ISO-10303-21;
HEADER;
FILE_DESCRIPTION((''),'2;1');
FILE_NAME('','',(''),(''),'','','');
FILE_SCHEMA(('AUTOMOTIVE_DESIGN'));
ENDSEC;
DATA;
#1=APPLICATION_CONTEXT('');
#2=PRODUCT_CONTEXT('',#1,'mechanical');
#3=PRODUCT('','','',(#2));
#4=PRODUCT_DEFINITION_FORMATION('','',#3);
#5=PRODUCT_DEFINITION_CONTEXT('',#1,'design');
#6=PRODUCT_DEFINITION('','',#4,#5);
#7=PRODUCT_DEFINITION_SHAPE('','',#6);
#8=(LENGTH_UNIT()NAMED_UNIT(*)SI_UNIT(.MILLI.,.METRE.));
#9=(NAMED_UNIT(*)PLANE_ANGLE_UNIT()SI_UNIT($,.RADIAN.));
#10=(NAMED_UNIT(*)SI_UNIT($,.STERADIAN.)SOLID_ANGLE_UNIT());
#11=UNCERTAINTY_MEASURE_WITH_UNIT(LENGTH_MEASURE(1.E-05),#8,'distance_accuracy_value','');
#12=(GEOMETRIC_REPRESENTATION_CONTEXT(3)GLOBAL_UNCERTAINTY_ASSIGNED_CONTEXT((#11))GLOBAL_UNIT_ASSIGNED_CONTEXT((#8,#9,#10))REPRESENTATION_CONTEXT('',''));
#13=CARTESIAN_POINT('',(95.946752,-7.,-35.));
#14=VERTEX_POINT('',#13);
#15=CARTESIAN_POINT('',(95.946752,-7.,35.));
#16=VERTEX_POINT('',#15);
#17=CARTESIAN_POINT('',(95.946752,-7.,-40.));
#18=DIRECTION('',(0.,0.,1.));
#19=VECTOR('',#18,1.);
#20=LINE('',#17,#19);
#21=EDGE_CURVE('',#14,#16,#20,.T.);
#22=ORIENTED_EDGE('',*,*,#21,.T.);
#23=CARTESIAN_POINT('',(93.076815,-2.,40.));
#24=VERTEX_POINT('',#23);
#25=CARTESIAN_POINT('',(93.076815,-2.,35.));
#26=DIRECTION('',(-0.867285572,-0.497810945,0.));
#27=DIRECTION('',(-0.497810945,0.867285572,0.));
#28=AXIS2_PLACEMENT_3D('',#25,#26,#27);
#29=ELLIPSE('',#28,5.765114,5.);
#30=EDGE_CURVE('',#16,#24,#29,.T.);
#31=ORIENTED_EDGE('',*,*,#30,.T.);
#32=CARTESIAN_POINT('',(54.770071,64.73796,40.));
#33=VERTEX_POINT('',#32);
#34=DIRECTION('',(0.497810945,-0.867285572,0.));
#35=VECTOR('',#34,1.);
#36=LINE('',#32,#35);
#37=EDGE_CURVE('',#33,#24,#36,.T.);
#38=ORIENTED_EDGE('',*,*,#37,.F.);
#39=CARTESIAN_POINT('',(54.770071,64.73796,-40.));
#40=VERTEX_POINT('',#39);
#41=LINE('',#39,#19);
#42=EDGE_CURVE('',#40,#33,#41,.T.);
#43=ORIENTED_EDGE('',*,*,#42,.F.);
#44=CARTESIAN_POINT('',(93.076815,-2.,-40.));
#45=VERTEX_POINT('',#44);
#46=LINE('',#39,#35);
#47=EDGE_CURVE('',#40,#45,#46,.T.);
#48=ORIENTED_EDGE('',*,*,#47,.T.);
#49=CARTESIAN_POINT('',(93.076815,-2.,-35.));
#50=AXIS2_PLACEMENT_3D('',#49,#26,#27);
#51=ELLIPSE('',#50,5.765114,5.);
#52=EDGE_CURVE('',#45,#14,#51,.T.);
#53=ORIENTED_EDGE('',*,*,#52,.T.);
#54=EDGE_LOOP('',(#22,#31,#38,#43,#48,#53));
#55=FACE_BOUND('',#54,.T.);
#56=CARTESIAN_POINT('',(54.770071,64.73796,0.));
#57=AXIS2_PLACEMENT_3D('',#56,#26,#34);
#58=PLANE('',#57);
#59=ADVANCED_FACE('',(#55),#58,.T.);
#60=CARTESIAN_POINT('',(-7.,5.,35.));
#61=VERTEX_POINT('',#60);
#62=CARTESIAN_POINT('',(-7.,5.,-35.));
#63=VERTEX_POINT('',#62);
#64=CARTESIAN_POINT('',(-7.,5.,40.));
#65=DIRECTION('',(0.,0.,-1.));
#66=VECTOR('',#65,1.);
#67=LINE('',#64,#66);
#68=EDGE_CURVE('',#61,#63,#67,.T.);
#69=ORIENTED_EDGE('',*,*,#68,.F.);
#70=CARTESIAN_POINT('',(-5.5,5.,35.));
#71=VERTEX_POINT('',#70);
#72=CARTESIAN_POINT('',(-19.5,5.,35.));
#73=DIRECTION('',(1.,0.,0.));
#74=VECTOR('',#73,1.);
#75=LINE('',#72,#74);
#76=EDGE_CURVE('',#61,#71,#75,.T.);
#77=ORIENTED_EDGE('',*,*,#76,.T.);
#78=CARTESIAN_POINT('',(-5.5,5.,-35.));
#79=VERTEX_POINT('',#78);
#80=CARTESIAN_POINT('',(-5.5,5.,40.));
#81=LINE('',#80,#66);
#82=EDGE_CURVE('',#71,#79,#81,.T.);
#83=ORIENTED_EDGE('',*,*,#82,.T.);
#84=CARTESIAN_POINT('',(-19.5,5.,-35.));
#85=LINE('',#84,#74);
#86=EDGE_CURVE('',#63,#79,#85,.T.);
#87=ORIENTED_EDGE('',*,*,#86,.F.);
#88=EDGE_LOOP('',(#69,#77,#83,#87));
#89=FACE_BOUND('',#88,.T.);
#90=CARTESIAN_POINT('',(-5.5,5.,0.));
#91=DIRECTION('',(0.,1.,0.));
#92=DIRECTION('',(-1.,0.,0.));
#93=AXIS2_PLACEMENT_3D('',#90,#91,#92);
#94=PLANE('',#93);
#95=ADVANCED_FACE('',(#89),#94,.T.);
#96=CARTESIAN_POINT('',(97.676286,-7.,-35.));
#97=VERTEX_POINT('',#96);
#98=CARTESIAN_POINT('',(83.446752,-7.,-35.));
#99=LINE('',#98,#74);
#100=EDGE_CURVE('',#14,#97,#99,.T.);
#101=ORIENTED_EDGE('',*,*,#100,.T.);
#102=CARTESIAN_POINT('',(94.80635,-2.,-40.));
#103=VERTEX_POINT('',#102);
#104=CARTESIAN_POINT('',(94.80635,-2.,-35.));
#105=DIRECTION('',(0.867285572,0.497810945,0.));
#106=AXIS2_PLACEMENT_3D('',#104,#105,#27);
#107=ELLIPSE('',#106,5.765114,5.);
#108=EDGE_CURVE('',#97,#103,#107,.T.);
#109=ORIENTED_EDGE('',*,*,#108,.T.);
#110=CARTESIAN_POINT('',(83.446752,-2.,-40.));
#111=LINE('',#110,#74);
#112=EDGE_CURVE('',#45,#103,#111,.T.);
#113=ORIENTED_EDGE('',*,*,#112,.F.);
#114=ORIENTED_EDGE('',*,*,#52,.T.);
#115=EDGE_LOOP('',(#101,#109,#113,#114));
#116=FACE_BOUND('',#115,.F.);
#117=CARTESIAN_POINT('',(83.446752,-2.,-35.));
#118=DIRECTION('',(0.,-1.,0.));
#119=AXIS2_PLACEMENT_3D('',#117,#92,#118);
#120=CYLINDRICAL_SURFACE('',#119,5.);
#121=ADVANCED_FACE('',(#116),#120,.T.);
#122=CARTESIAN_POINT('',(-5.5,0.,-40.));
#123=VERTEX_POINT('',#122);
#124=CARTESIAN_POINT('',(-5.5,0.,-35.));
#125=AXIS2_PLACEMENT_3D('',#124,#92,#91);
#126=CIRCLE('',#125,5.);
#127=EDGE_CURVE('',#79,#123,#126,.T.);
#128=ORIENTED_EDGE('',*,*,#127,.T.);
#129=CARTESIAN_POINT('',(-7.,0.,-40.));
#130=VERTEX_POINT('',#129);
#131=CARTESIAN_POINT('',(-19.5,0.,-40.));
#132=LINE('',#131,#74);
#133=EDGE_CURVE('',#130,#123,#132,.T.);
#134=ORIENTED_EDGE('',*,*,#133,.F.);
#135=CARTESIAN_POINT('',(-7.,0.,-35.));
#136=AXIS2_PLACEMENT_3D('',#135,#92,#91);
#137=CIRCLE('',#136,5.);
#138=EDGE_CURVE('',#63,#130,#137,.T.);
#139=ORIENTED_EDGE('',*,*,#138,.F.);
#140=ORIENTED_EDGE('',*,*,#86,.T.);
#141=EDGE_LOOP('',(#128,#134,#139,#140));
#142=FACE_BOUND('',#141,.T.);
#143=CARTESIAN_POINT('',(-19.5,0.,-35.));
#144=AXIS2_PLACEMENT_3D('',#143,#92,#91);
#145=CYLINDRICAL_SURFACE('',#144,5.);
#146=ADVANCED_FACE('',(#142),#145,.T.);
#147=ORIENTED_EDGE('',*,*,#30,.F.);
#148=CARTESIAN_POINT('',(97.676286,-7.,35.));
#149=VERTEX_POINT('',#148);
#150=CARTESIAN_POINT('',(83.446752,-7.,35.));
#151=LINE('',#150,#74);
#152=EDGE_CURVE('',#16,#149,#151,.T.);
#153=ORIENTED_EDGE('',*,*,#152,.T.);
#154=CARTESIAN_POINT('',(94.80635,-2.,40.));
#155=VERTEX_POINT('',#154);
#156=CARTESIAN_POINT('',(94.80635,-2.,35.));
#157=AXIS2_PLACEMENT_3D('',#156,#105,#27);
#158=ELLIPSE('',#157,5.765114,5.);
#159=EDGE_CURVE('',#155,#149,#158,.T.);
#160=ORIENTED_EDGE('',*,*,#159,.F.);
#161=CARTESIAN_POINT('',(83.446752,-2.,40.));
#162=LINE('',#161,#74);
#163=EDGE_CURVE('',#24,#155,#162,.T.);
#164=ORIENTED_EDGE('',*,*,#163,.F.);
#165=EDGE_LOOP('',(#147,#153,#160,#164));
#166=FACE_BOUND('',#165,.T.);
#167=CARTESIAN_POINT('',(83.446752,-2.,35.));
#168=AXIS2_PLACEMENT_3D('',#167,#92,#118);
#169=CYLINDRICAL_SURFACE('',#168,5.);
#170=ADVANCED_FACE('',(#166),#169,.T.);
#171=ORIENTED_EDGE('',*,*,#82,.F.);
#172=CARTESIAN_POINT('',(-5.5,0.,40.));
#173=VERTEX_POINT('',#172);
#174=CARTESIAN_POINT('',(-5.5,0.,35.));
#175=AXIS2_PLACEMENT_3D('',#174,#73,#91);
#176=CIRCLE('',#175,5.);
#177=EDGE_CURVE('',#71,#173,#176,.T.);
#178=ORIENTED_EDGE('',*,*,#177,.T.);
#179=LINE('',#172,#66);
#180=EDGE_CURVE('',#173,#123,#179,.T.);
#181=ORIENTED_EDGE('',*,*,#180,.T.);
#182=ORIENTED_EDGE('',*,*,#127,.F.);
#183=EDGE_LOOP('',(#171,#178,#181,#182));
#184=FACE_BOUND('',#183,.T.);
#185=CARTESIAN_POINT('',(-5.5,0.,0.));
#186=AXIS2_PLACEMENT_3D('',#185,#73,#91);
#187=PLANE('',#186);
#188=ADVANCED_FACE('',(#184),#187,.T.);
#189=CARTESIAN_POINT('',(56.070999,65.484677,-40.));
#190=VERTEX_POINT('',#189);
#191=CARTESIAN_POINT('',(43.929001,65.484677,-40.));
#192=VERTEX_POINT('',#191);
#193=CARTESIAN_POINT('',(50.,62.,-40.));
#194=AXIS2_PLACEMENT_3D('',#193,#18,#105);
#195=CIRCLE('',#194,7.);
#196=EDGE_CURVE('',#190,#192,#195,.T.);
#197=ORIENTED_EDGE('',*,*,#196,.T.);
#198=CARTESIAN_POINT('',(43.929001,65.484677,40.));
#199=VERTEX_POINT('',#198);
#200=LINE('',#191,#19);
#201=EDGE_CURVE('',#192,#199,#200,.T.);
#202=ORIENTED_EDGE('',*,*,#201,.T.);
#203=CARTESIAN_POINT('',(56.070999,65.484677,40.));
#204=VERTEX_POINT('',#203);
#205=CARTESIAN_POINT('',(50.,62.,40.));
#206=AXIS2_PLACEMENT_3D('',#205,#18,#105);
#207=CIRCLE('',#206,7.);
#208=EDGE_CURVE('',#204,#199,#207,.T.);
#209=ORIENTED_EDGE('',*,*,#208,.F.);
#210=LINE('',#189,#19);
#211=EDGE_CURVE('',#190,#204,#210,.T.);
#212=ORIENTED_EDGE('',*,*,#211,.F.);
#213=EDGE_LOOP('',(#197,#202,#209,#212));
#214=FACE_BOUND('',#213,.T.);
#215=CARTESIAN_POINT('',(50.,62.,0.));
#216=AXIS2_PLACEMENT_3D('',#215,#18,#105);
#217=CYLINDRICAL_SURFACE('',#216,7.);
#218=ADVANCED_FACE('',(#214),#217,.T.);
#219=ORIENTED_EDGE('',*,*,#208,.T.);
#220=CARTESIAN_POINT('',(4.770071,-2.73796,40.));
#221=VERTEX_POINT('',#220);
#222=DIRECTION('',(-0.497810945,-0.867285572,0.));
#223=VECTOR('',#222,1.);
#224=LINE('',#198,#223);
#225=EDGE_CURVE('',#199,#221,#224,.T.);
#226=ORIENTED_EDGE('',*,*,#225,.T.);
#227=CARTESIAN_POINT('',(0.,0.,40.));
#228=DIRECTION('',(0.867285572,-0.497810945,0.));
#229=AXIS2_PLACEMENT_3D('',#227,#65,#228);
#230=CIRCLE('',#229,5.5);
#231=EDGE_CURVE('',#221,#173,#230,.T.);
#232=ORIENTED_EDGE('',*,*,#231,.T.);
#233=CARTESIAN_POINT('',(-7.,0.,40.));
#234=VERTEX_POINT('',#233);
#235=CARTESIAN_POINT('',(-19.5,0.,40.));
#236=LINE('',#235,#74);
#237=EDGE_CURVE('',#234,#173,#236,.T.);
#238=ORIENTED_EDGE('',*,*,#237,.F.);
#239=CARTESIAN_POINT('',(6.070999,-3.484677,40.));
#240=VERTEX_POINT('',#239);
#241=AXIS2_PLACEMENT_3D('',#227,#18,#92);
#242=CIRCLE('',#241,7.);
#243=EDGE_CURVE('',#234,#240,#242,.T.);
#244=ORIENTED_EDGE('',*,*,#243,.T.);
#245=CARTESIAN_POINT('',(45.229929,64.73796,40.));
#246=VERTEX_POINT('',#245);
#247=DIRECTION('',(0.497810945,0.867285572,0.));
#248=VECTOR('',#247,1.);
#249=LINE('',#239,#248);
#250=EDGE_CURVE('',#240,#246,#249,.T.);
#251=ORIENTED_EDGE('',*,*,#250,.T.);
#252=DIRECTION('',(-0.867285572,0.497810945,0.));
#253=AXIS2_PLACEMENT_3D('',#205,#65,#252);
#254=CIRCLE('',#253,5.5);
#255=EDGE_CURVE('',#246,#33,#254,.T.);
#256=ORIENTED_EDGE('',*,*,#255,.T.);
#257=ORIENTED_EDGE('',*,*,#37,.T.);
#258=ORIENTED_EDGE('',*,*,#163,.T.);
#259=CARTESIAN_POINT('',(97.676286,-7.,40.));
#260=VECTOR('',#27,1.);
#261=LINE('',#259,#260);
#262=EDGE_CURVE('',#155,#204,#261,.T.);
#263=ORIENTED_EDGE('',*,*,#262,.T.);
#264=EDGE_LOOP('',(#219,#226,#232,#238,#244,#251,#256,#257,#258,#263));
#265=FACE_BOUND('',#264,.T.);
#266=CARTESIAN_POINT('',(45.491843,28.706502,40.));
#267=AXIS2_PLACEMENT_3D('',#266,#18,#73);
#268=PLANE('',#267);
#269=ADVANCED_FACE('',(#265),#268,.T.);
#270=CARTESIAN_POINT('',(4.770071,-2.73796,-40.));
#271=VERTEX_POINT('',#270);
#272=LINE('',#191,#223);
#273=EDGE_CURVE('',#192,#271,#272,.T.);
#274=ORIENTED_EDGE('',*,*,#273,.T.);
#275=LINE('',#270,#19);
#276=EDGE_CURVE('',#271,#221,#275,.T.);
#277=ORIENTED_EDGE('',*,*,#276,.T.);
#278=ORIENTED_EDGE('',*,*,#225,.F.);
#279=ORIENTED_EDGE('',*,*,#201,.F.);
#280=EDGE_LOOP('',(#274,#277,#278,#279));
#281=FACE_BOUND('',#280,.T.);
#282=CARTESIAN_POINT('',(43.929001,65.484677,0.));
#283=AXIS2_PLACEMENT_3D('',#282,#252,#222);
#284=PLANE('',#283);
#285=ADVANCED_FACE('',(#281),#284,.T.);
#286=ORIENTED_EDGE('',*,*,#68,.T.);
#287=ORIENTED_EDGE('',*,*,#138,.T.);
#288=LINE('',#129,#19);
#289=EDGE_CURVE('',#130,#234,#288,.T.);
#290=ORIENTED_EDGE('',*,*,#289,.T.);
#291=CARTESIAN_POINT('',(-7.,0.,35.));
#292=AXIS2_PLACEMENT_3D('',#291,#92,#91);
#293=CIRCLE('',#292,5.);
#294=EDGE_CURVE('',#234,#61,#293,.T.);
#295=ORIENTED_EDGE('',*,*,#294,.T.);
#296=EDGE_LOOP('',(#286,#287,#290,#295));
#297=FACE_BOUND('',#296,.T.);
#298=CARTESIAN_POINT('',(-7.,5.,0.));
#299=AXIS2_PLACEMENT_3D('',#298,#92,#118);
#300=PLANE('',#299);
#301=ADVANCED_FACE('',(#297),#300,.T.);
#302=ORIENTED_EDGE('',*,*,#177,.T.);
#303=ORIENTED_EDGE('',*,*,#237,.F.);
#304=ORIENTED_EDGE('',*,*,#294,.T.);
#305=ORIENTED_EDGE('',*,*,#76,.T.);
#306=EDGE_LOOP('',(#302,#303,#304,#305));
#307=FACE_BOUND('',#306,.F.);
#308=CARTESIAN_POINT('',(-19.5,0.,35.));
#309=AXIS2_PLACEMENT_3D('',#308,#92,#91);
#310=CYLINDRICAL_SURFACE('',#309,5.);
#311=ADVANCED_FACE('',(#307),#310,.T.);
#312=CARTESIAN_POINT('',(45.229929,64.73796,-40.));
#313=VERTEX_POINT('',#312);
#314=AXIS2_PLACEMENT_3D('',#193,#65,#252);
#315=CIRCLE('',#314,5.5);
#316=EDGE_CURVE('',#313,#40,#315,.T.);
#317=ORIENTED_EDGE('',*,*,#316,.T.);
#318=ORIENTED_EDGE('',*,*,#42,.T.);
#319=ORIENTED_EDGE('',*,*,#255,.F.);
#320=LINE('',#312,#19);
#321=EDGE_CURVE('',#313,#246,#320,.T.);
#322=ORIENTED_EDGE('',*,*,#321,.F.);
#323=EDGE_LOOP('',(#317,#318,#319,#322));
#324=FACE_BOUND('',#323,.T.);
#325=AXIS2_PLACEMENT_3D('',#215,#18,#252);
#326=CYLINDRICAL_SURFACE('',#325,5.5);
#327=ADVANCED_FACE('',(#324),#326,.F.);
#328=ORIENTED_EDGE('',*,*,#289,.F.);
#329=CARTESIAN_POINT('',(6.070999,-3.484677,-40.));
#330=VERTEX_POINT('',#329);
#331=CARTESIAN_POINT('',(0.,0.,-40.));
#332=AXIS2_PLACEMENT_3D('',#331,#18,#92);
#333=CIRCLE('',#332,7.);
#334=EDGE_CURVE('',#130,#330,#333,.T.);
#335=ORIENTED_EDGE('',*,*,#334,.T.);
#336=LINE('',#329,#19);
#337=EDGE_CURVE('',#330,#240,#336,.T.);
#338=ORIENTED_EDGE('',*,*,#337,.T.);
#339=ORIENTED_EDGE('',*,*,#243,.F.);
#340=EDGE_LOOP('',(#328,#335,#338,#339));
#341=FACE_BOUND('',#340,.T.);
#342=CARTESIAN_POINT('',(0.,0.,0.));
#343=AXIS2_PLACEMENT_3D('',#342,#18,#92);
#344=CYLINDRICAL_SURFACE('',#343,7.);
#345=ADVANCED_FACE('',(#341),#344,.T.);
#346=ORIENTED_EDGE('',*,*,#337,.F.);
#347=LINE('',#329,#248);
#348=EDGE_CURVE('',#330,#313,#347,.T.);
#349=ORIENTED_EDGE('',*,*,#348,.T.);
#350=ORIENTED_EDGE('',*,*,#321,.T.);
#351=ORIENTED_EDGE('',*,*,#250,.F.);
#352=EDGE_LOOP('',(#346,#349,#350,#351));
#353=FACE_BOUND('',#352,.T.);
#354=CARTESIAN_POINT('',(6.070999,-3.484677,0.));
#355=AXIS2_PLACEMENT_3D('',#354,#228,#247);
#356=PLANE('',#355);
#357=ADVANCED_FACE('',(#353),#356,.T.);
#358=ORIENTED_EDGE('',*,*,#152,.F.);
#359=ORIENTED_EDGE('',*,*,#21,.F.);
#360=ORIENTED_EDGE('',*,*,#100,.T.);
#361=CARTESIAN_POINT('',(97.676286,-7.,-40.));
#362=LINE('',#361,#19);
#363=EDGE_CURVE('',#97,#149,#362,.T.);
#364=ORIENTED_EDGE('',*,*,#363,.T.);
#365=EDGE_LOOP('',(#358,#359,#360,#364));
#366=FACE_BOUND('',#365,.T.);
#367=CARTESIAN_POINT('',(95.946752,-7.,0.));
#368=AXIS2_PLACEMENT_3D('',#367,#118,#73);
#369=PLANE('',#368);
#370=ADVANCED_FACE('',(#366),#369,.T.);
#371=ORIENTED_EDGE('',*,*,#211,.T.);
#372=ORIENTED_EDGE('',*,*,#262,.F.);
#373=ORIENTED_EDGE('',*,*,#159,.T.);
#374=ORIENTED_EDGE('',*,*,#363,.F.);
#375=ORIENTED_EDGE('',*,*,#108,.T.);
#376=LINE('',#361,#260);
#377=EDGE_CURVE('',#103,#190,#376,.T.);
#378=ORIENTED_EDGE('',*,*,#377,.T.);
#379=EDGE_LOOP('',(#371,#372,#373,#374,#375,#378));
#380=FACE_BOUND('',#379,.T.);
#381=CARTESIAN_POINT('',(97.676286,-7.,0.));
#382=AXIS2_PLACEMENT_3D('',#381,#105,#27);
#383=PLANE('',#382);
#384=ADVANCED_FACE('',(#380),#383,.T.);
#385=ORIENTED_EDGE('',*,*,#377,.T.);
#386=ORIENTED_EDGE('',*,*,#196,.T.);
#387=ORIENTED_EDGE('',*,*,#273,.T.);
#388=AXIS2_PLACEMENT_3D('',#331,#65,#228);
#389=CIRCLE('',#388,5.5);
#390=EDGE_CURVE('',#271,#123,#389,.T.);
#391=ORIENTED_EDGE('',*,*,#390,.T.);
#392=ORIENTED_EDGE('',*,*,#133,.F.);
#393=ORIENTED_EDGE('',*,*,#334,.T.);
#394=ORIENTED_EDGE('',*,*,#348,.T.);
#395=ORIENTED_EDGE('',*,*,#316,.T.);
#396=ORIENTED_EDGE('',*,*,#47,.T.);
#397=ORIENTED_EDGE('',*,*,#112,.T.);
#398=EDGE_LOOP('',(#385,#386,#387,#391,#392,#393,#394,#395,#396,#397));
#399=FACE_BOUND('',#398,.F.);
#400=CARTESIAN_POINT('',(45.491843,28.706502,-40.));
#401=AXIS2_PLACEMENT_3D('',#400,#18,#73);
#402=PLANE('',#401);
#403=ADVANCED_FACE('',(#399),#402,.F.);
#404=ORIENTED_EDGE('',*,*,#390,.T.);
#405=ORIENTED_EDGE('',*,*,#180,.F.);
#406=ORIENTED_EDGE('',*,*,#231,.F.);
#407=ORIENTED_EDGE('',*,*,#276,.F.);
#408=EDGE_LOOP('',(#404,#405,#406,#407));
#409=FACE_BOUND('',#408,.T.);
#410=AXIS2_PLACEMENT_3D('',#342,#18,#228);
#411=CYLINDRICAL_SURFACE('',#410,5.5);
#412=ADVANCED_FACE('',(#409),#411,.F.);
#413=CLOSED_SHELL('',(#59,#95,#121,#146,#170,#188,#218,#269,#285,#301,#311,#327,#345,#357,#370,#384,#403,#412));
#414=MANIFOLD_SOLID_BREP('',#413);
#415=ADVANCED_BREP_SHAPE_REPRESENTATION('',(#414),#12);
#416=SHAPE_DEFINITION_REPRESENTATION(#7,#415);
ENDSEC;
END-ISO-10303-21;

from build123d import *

# Parameters (mm, degrees)
F1_DEPTH    = 40
F2_T1_DEPTH = 14
F2_T3_DEPTH = 26.7295341336


# Not quite as in the source:
# - a fillet or chamfer that OpenCascade refuses, or shapes differently, is made with other operations: its cross-section is extruded or revolved along the edge and cut away or added


with BuildPart() as f1:
    # F0 (on Top) → F1 (new body, symmetric)
    with BuildSketch(Plane.XY):
        with BuildLine():
            Line((-7, 5), (-7, 0))
            ThreePointArc((-7, 0), (-1.8031925829, -6.7637634871), (6.0709990026, -3.484676615))
            Line((6.0709990026, -3.484676615), (45.2299293551, 64.7379601975))
            ThreePointArc((45.2299293551, 64.7379601975), (50, 67.5), (54.7700706449, 64.7379601975))
            Line((54.7700706449, 64.7379601975), (95.9467521433, -7))
            Line((95.9467521433, -7), (97.6762862769, -7))
            Line((97.6762862769, -7), (56.0709990026, 65.484676615))
            ThreePointArc((56.0709990026, 65.484676615), (50, 69), (43.9290009974, 65.484676615))
            Line((43.9290009974, 65.484676615), (4.7700706449, -2.7379601975))
            ThreePointArc((4.7700706449, -2.7379601975), (-1.4167941723, -5.314385597), (-5.5, 0))
            Line((-5.5, 0), (-5.5, 5))
            Line((-5.5, 5), (-7, 5))
        make_face()
    extrude(amount=F1_DEPTH, both=True)

    # F2: fillet of radius 5 on 4 edges, made by hand

    # F2_s2 → F2_t1 (cut)
    with BuildSketch(Plane.YZ.offset(-19.5)):
        with BuildLine():
            ThreePointArc((5, 35), (3.5355339059, 38.5355339059), (0, 40))
            Line((0, 40), (5, 40))
            Line((5, 40), (5, 35))
        make_face()
        with BuildLine():
            ThreePointArc((5, -35), (3.5355339059, -38.5355339059), (0, -40))
            Line((0, -40), (5, -40))
            Line((5, -40), (5, -35))
        make_face()
    extrude(amount=F2_T1_DEPTH, mode=Mode.SUBTRACT)

    # F2_s4 → F2_t3 (cut)
    with BuildSketch(Plane.YZ.offset(83.4467521433)):
        with BuildLine():
            ThreePointArc((-7, 35), (-5.5355339059, 38.5355339059), (-2, 40))
            Line((-2, 40), (-7, 40))
            Line((-7, 40), (-7, 35))
        make_face()
        with BuildLine():
            ThreePointArc((-7, -35), (-5.5355339059, -38.5355339059), (-2, -40))
            Line((-2, -40), (-7, -40))
            Line((-7, -40), (-7, -35))
        make_face()
    extrude(amount=F2_T3_DEPTH, mode=Mode.SUBTRACT)


solid = f1.part
